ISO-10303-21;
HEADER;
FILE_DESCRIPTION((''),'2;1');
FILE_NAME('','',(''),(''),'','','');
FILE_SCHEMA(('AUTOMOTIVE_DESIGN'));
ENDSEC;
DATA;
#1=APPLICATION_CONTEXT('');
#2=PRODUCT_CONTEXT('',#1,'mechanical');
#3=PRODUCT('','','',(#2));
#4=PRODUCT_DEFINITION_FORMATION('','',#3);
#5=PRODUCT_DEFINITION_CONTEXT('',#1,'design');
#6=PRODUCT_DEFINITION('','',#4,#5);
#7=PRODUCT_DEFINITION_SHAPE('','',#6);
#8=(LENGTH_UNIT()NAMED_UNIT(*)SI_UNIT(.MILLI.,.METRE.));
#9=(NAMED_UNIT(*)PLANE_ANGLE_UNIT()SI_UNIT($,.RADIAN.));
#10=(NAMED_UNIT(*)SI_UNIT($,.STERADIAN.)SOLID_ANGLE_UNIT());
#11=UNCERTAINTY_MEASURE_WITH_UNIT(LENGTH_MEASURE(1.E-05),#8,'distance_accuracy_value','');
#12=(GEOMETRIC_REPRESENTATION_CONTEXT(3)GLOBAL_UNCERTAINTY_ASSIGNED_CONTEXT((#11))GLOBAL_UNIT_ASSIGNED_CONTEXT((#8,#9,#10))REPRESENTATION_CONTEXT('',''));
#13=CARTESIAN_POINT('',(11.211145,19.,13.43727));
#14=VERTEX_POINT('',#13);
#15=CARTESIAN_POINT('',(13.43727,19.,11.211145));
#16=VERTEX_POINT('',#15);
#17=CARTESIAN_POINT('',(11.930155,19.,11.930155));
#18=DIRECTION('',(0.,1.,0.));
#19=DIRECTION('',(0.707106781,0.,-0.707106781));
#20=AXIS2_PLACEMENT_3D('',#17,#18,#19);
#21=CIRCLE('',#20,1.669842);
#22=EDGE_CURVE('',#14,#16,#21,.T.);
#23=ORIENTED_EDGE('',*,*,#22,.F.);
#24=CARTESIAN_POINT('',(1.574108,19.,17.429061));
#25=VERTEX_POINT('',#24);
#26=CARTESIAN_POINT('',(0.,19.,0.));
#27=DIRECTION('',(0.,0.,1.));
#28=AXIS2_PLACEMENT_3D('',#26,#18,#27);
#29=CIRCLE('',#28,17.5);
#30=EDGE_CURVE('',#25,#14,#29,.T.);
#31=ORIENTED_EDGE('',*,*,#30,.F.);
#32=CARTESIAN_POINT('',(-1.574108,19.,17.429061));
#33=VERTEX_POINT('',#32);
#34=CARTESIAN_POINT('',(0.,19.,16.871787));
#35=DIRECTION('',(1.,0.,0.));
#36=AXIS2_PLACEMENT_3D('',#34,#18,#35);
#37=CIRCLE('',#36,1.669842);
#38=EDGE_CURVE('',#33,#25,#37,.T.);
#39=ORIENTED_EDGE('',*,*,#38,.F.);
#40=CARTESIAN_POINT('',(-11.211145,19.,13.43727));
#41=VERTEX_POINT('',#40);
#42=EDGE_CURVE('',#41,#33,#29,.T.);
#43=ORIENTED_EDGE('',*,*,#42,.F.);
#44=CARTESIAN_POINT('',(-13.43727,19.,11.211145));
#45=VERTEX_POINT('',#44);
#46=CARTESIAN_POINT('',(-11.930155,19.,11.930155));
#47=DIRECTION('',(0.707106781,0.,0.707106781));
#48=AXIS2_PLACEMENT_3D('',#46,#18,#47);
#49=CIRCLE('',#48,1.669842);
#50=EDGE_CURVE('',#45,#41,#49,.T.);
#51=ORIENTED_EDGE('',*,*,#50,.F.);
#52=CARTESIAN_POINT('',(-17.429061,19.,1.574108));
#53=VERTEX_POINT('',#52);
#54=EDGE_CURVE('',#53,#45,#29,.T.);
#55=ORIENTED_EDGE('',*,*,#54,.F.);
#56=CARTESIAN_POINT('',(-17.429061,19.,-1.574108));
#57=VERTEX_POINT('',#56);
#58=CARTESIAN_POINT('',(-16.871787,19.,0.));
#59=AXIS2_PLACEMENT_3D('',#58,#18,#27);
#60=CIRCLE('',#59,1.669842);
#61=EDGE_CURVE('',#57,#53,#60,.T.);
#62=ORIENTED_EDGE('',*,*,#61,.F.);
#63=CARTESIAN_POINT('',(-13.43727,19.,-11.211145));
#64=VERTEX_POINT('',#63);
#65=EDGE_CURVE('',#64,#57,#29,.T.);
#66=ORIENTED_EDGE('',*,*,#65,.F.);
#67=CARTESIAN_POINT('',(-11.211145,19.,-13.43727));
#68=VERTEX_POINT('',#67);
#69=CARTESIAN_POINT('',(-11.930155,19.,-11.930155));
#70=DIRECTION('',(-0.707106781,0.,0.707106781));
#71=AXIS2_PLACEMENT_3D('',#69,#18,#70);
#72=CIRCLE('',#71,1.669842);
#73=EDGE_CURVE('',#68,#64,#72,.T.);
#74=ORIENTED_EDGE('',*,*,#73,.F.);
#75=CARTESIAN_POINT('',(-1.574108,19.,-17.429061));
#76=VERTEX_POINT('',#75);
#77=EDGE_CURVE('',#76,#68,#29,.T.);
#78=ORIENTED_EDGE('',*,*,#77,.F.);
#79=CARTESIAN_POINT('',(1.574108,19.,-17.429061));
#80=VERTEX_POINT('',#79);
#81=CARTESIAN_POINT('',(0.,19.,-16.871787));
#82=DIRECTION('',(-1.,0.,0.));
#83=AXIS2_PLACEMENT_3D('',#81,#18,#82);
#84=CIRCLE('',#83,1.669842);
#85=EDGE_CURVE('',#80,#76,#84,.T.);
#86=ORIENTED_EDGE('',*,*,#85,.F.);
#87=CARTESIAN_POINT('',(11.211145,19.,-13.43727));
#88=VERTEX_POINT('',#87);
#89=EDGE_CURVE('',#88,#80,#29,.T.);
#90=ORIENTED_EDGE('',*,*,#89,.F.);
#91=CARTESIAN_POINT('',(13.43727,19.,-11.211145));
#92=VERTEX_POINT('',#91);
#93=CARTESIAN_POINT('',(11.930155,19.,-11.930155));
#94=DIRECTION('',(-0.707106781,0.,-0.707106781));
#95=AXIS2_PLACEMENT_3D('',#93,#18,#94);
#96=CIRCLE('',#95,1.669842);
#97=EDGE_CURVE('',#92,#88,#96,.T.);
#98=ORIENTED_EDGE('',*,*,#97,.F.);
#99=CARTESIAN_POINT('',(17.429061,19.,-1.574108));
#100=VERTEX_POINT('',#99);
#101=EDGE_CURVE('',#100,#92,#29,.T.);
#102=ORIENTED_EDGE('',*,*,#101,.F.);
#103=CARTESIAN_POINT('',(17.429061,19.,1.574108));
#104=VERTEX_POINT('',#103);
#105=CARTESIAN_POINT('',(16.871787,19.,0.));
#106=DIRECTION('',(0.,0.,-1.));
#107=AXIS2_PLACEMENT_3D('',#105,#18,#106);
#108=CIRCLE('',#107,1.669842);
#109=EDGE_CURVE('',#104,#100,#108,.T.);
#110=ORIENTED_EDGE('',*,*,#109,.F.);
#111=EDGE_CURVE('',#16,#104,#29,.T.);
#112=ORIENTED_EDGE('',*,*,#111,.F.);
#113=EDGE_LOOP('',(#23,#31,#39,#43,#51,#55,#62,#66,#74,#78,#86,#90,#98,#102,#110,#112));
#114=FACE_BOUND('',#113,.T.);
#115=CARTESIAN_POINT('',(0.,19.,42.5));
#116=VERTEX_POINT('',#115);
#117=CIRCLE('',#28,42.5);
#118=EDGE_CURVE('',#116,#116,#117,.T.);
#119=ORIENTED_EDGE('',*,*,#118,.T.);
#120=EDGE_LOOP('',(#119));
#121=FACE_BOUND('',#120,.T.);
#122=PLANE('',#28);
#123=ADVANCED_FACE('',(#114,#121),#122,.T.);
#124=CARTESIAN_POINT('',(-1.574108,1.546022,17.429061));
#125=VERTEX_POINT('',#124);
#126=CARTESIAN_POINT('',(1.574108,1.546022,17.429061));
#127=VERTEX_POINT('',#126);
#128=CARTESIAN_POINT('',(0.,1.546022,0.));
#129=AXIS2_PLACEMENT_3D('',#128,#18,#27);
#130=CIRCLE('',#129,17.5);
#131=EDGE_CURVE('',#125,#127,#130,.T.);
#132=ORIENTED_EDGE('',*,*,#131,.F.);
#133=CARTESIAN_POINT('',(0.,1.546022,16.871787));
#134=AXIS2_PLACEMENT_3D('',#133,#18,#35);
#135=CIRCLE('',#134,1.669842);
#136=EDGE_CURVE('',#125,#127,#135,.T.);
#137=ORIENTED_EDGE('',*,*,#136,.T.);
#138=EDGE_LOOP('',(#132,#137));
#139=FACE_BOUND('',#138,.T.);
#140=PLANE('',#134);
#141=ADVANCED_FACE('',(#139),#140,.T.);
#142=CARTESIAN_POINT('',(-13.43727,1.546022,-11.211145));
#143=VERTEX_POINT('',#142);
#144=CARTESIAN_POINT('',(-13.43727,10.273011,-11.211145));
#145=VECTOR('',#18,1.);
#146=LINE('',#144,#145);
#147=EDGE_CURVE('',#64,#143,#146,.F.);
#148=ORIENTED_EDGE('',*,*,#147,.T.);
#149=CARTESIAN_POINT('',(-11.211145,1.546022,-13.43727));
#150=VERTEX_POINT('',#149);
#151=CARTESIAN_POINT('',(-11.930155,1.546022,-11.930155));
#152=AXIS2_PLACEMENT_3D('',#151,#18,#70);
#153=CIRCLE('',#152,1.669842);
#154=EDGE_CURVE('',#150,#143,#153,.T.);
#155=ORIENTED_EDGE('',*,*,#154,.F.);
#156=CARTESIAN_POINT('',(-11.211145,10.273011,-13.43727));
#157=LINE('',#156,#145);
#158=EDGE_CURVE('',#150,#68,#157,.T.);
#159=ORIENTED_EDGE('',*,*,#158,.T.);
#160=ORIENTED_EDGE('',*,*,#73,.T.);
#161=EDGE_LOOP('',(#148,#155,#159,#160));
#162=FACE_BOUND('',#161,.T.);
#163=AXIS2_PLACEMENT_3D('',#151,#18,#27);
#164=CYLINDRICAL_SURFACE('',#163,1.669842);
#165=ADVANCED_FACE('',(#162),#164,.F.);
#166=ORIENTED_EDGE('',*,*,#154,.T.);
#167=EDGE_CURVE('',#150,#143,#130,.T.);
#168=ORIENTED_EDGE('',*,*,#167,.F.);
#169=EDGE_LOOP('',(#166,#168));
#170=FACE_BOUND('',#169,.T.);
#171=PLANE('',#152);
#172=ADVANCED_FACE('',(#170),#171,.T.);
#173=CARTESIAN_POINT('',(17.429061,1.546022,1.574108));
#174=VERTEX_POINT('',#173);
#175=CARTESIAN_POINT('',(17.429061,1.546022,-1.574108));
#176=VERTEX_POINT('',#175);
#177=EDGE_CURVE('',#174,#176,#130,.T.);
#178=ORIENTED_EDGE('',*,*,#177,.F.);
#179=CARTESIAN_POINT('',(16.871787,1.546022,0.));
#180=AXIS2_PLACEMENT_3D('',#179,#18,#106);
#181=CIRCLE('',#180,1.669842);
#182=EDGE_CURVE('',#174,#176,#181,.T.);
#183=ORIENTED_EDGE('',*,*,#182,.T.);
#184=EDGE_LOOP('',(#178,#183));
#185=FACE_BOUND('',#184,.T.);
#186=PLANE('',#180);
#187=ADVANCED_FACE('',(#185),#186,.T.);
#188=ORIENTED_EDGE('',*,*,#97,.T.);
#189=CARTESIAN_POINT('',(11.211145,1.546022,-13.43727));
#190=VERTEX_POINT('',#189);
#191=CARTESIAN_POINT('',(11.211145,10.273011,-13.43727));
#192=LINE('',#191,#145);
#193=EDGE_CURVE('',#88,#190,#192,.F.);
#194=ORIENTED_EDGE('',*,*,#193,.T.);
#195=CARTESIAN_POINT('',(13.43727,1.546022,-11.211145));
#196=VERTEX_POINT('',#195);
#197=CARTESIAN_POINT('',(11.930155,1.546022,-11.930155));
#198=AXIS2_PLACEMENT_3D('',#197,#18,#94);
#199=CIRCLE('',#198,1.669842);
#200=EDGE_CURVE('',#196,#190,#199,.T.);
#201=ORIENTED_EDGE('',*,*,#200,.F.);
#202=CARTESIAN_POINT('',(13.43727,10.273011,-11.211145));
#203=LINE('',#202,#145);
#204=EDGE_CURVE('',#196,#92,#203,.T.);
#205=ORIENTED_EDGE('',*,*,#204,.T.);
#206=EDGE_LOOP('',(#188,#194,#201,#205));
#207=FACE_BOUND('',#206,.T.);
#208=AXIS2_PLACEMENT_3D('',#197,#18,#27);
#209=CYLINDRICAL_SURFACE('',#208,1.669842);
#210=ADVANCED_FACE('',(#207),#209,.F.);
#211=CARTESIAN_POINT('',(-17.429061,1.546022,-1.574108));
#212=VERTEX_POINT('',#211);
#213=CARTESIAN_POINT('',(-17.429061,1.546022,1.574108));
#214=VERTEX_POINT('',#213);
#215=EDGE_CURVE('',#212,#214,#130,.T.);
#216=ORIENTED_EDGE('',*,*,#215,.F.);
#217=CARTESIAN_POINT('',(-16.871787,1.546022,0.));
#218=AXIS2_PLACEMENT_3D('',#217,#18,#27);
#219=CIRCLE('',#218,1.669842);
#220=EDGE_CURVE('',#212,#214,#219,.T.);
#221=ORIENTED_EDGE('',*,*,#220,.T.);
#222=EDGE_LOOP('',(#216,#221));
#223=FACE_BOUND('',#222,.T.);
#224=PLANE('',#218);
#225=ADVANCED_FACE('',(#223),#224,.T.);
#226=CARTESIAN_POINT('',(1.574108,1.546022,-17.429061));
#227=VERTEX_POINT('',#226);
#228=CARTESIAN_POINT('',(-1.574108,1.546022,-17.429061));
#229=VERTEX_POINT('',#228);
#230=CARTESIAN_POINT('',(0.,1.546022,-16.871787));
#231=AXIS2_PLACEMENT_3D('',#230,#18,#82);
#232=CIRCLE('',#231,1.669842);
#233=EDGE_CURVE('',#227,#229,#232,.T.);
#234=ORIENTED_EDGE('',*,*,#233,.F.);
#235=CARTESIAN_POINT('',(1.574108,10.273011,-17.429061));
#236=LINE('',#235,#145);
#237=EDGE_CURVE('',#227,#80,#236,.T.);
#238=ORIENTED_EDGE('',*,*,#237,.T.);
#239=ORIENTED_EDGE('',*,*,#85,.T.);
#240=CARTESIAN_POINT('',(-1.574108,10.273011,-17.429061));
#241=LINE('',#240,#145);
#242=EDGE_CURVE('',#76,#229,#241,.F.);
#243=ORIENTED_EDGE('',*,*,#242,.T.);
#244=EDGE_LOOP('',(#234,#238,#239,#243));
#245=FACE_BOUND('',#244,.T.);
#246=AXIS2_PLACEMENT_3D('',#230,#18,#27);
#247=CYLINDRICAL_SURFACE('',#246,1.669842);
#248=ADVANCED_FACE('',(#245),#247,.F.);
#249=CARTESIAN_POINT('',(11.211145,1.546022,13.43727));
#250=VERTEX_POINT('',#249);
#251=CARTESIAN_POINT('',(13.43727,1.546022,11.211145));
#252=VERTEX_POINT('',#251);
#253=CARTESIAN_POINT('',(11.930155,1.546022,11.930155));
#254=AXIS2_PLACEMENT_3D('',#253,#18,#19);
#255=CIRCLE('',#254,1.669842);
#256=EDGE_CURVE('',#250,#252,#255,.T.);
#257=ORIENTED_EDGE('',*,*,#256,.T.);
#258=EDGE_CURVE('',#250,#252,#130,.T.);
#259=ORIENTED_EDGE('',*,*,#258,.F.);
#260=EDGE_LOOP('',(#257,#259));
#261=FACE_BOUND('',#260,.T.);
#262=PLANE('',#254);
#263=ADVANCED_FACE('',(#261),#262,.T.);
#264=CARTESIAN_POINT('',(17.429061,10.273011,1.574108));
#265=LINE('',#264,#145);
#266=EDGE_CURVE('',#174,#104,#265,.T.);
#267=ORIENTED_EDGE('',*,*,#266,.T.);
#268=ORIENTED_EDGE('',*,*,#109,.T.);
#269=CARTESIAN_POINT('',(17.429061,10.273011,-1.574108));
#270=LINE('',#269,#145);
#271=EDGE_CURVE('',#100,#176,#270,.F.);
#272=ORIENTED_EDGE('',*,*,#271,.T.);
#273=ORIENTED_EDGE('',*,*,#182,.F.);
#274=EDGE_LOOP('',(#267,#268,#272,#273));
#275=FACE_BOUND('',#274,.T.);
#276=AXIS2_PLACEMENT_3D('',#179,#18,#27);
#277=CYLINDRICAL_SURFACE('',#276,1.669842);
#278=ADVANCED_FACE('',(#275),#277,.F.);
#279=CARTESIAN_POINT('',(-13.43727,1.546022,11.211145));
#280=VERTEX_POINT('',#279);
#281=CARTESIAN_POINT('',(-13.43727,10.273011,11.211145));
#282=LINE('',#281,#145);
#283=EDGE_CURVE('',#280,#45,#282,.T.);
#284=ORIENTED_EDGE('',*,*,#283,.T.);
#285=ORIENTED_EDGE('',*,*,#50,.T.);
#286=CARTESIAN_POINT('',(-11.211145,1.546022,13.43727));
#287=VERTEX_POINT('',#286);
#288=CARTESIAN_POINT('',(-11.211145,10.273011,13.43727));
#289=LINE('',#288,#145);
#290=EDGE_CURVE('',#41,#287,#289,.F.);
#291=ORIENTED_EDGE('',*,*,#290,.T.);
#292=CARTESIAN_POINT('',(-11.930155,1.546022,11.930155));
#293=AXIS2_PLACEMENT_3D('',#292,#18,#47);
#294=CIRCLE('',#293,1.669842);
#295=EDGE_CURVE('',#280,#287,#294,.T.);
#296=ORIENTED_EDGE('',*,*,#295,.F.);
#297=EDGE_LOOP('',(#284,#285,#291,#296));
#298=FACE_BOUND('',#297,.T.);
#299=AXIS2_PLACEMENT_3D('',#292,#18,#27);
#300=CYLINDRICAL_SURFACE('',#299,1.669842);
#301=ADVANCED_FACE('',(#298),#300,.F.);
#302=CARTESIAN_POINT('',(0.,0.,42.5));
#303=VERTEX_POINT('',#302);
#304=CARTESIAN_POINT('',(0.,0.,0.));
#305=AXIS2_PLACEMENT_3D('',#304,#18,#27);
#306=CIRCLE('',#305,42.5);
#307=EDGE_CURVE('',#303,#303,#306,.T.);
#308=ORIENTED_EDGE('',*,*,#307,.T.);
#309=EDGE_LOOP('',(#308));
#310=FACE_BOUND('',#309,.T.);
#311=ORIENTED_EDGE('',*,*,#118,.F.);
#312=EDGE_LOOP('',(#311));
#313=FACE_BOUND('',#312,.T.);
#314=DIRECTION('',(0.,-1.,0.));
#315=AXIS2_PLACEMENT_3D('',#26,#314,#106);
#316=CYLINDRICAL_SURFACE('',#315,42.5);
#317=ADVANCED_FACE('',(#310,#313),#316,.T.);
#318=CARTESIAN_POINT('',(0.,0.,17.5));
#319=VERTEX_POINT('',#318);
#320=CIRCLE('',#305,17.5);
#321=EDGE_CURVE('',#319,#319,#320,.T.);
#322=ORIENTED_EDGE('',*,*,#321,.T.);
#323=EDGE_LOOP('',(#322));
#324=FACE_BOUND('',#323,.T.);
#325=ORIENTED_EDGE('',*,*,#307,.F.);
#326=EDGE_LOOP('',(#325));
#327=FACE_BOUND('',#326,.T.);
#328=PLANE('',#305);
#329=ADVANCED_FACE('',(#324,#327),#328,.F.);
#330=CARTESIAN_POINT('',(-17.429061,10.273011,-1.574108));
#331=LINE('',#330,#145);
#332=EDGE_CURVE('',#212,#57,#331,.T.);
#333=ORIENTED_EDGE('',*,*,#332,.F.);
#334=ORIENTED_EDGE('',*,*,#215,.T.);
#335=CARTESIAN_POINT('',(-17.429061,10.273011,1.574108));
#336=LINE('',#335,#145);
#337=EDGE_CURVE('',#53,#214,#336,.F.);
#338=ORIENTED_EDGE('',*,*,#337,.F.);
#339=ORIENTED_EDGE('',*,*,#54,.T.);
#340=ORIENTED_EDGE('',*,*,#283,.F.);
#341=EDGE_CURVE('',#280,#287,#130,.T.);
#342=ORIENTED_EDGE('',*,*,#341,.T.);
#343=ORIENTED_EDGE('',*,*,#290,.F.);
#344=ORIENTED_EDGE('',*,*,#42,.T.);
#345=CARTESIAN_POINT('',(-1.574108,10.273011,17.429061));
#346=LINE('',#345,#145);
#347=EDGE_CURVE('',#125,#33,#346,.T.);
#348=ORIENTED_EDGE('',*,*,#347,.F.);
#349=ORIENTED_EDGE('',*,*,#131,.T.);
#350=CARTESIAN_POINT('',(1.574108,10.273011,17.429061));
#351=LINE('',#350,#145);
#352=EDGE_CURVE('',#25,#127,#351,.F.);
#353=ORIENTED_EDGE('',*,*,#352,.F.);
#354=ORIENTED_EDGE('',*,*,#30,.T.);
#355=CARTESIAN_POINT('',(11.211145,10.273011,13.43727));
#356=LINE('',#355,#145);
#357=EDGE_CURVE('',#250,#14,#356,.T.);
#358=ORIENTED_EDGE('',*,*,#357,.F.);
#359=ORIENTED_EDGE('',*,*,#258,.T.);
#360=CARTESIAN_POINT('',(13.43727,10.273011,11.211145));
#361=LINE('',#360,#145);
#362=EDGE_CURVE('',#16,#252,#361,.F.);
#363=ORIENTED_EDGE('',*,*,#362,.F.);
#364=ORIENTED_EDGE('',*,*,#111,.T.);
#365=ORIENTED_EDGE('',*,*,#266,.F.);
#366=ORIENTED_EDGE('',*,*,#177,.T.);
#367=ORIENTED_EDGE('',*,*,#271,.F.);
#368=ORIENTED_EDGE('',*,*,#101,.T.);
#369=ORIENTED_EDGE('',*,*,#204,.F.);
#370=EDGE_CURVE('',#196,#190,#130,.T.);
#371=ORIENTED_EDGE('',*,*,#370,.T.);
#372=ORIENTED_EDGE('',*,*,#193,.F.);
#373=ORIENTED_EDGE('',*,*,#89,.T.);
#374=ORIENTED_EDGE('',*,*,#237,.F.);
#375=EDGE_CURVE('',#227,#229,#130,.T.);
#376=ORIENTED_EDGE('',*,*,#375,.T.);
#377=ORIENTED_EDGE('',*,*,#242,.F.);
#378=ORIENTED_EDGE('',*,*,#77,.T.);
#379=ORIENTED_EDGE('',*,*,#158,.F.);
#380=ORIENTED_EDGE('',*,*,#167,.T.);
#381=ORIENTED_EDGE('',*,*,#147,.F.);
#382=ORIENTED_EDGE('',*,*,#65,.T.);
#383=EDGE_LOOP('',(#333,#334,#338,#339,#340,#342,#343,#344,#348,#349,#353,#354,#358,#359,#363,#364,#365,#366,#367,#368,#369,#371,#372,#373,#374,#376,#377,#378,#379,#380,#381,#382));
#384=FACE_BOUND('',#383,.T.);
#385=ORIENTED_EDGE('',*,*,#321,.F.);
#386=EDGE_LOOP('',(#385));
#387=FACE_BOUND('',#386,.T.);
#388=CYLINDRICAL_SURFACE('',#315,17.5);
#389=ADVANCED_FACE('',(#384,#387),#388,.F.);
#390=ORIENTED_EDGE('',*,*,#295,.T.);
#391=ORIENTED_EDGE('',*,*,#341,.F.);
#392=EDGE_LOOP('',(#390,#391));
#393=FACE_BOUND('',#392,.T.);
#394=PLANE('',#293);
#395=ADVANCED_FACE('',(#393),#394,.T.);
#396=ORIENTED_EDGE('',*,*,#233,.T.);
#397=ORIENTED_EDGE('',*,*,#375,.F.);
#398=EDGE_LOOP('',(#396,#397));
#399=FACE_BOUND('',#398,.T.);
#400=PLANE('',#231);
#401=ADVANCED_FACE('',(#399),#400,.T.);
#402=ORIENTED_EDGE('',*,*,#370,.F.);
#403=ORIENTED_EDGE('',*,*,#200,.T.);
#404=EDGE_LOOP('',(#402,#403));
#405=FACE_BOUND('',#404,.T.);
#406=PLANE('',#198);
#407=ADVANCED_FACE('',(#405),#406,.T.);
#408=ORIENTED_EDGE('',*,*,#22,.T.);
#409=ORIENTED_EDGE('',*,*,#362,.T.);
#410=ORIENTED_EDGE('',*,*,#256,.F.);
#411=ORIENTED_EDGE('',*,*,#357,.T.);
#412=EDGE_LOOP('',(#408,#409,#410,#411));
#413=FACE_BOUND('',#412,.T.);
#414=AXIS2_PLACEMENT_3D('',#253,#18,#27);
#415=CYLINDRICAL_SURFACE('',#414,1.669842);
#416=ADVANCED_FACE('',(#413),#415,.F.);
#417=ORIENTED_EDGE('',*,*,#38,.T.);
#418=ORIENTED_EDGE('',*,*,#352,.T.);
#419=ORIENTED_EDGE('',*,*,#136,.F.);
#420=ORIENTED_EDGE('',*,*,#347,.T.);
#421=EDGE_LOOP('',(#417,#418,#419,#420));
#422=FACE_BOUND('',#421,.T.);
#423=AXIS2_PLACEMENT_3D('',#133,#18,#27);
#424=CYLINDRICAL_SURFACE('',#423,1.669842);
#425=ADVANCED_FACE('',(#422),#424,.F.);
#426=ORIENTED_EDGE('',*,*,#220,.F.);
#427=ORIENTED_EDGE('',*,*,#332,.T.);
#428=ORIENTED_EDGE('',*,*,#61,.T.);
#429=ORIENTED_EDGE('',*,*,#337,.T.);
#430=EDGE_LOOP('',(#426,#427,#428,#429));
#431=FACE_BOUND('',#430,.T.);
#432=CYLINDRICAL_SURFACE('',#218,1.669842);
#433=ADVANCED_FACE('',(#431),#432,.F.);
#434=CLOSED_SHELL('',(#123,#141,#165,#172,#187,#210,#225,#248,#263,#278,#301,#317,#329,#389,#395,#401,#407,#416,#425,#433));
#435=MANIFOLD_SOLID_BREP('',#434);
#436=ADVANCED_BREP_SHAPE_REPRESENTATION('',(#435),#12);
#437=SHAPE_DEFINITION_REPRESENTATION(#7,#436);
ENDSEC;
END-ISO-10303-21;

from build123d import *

# Parameters (mm, degrees)
SKETCH1_R           = 42.5
BOSS_EXTRUDE1_DEPTH = 19
SKETCH2_R           = 17.5
CUT_EXTRUDE1_DEPTH  = 64.035704168
SKETCH3_R           = 1.669842058
CUT_EXTRUDE2_DEPTH  = 17.453977875
CIRPATTERN1_COUNT   = 8


with BuildPart() as part:
    # Sketch1 → Boss-Extrude1 (new body)
    with BuildSketch(Plane(origin=(0, 0, 0), x_dir=(1, 0, 0), z_dir=(0, 1, 0))):
        Circle(SKETCH1_R)
    extrude(amount=BOSS_EXTRUDE1_DEPTH)

    # Sketch2 → Cut-Extrude1 (cut, through all)
    with BuildSketch(Plane(origin=(0, 0, 0), x_dir=(1, 0, 0), z_dir=(0, 1, 0))):
        Circle(SKETCH2_R)
    extrude(amount=CUT_EXTRUDE1_DEPTH, mode=Mode.SUBTRACT)

    # Sketch3 → Cut-Extrude2 (cut)
    with BuildSketch(Plane(origin=(0, 19, 0), x_dir=(1, 0, 0), z_dir=(0, 1, 0))):
        with Locations((-16.871786878, 0)):
            Circle(SKETCH3_R)
    cut_extrude2 = extrude(amount=-CUT_EXTRUDE2_DEPTH, mode=Mode.SUBTRACT)

    # CirPattern1: Cut-Extrude2 ×8 about axis
    cirpattern1_axis = Axis((0, 0, 0), (0, 1, 0))
    for i in range(1, CIRPATTERN1_COUNT):
        add(cut_extrude2.rotate(cirpattern1_axis, i * 360 / CIRPATTERN1_COUNT), mode=Mode.SUBTRACT)


solid = part.part
